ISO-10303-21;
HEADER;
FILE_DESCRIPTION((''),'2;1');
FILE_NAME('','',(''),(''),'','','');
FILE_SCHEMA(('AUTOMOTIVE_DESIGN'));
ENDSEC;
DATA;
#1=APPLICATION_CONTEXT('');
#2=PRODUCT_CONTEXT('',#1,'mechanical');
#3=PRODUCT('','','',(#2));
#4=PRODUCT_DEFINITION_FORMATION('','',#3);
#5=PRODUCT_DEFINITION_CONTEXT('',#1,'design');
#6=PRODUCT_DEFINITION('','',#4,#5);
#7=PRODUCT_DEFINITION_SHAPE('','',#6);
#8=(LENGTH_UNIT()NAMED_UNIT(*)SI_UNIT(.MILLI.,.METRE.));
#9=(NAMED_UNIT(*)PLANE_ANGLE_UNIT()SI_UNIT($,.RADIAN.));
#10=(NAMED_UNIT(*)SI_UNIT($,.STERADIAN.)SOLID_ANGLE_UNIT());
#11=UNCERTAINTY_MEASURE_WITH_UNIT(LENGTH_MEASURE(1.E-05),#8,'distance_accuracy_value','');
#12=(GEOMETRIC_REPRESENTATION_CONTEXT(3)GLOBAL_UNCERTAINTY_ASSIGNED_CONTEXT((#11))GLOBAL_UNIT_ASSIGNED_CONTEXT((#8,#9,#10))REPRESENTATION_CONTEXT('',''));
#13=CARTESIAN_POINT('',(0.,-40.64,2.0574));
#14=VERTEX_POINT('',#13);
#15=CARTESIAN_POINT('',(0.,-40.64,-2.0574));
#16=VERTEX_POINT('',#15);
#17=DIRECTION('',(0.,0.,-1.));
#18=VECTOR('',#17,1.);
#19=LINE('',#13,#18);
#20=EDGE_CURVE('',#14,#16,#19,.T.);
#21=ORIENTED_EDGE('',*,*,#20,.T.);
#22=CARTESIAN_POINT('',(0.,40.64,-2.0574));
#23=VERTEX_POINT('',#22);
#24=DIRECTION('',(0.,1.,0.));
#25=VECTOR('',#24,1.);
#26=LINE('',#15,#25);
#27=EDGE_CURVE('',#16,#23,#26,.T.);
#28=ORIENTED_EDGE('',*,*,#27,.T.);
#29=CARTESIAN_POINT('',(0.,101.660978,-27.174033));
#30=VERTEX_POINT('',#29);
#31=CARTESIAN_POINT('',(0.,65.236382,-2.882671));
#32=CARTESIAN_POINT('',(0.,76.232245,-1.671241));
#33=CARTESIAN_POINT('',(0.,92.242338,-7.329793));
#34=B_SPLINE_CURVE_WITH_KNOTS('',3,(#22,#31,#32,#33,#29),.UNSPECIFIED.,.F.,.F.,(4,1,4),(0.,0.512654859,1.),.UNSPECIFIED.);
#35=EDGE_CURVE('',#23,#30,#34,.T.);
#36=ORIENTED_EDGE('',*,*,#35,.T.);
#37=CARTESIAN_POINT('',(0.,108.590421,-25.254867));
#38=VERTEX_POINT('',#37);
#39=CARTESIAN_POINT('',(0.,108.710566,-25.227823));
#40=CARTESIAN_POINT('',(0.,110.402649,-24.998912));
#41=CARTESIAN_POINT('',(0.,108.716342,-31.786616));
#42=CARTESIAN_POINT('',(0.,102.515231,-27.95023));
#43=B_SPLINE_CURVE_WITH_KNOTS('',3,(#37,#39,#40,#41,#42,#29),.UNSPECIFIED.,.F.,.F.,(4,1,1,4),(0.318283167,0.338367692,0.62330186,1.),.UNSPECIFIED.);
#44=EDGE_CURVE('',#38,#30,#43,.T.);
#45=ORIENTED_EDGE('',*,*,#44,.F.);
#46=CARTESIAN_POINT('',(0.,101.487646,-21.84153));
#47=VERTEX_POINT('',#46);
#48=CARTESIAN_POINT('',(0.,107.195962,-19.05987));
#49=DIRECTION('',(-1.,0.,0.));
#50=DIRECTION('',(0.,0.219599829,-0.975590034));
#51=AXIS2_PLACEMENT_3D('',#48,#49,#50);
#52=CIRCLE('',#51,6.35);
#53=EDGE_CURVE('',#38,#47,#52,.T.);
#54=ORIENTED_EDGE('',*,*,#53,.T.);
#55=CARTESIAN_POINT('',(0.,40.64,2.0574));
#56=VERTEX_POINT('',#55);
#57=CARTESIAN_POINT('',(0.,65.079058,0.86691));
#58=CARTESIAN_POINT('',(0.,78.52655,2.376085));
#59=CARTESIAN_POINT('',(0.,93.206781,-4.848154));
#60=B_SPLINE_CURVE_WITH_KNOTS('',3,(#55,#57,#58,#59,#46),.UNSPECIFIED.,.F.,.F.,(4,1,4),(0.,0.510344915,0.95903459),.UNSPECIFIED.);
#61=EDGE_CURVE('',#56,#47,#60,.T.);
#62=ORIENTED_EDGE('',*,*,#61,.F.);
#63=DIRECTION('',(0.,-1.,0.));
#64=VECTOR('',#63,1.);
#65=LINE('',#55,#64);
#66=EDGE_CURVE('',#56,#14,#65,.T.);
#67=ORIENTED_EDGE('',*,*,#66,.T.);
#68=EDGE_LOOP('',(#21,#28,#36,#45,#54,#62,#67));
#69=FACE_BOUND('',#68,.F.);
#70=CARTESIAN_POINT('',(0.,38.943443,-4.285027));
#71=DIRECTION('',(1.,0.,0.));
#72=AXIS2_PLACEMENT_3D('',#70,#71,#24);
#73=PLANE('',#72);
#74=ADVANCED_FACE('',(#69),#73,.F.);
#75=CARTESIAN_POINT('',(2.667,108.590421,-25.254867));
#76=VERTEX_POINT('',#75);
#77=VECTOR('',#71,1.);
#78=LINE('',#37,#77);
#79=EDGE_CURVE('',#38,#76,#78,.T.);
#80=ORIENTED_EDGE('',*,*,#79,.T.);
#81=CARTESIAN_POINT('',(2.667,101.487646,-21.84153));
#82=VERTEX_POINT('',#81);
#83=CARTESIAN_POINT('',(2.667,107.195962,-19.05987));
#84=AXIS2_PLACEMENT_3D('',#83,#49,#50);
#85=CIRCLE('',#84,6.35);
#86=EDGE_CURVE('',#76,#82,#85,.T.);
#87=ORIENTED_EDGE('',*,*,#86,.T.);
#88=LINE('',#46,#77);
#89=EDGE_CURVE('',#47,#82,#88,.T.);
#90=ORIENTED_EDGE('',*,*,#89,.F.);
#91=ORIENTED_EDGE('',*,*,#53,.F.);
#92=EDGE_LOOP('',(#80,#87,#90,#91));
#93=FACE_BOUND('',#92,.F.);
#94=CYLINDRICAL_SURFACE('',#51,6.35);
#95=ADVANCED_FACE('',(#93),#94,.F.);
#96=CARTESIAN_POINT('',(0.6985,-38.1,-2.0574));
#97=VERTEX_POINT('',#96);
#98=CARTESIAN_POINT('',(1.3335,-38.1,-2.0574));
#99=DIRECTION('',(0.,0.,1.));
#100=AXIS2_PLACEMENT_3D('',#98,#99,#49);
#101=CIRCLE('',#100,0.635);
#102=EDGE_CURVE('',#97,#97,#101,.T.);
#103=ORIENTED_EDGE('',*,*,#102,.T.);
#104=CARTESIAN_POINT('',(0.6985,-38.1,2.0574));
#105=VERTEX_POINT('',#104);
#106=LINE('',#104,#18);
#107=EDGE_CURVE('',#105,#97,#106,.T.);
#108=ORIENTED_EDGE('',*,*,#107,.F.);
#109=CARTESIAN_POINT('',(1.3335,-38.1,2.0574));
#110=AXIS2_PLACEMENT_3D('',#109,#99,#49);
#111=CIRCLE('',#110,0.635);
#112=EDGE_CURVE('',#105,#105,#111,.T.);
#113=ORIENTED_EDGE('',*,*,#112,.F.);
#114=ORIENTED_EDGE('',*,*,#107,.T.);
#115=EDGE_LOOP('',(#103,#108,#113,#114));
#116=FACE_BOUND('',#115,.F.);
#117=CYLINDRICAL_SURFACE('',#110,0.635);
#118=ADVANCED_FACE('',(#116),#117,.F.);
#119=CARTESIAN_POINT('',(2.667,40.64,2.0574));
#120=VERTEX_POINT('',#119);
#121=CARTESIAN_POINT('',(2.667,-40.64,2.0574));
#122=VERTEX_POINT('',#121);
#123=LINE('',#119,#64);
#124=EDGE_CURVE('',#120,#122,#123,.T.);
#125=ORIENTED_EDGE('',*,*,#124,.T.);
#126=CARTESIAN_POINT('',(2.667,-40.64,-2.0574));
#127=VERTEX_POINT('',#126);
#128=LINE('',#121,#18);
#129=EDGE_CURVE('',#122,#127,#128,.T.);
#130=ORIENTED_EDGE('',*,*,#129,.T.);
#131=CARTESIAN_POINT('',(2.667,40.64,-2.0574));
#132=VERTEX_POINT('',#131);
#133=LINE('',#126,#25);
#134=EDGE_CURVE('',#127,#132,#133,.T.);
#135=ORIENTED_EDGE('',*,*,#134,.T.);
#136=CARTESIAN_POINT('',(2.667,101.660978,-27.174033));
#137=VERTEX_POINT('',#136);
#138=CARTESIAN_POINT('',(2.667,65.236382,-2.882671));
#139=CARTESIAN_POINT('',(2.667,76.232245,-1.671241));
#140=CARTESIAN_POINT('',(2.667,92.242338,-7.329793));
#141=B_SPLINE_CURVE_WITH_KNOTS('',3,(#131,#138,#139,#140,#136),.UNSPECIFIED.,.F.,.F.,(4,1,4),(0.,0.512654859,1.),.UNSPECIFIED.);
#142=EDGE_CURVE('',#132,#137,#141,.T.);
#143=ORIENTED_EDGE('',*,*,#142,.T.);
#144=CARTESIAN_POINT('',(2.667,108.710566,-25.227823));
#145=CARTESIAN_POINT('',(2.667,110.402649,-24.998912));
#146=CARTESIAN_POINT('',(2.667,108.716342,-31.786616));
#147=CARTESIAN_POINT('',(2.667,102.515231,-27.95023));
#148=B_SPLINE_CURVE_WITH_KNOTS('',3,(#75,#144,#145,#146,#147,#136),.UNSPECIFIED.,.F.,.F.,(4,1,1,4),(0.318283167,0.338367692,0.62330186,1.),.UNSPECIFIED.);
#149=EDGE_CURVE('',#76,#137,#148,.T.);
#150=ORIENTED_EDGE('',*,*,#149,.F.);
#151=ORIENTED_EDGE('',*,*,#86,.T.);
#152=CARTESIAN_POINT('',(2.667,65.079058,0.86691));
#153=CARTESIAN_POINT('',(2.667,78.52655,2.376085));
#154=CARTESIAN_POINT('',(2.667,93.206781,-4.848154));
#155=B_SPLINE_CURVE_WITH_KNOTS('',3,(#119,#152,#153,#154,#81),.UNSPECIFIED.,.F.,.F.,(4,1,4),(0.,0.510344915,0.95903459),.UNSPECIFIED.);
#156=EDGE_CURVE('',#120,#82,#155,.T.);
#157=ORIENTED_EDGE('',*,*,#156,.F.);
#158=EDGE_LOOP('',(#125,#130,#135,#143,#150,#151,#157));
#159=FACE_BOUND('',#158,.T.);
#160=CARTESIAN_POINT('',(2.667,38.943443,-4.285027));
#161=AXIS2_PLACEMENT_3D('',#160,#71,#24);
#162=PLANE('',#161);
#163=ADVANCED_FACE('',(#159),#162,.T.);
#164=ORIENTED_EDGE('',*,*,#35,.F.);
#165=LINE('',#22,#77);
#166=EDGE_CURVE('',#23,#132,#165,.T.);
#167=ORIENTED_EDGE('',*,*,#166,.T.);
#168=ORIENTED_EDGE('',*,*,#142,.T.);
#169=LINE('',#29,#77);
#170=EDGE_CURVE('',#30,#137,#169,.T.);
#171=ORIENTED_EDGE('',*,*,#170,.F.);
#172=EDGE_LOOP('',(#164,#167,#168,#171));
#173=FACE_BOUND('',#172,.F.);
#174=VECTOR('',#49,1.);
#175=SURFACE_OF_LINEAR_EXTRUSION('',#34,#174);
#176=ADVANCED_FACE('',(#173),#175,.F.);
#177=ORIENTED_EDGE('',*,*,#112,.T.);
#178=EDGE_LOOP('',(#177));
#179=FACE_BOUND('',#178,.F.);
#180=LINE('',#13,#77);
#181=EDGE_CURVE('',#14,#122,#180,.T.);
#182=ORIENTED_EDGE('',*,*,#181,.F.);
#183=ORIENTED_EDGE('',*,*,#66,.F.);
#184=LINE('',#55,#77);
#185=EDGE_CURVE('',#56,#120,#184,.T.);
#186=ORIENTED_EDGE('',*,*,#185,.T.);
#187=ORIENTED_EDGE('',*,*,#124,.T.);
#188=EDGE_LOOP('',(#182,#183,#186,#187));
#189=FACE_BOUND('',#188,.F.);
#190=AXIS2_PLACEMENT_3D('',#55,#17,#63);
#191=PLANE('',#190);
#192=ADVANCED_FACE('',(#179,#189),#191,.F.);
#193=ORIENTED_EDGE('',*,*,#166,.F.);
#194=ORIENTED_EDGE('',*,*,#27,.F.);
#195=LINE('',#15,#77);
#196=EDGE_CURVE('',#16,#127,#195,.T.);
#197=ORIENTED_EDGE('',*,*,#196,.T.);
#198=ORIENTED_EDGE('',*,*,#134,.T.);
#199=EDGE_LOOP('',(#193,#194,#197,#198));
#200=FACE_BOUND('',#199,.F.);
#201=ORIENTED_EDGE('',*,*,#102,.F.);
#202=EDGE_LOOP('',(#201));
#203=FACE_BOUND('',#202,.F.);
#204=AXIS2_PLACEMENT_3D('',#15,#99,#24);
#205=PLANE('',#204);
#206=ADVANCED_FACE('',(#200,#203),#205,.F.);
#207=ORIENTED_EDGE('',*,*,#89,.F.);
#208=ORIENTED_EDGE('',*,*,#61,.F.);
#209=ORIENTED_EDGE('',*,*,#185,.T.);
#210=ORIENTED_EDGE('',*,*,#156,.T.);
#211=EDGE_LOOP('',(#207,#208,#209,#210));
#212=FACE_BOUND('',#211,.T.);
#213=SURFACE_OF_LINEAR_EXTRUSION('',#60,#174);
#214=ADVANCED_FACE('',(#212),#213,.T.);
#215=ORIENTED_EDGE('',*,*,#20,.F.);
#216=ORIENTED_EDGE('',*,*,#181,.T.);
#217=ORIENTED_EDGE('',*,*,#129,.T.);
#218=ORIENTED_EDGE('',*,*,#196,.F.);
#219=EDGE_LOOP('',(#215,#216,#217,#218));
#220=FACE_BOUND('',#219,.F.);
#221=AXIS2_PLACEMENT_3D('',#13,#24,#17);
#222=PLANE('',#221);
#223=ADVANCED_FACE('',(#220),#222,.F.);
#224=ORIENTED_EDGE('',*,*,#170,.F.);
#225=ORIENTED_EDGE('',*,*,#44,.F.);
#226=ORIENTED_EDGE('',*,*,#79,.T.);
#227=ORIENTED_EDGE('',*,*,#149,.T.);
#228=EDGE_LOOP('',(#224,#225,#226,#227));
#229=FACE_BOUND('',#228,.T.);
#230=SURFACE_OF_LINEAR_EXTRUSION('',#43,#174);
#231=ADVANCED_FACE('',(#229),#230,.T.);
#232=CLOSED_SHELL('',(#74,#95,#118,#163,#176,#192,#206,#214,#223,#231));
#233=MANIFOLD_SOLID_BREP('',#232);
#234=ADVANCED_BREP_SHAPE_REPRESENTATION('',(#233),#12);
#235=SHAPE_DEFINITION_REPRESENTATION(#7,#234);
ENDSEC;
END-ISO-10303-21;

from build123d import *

# Parameters (mm, degrees)
F1_DEPTH = 2.667
F3_DEPTH = 7.62


# Not quite as in the source:
# - a feature names something its author has since deleted; it is built from what else it names


with BuildPart() as f1:
    # F0 (on Right) → F1 (new body)
    with BuildSketch(Plane.YZ):
        with BuildLine():
            Line((40.64, 2.0574), (-40.64, 2.0574))
            Line((-40.64, 2.0574), (-40.64, -2.0574))
            Line((-40.64, -2.0574), (40.64, -2.0574))
            add(Edge.make_bspline(
                [(40.64, -2.0574), (65.2363823215, -2.8826714553), (76.2322454092, -1.6712410932), (92.2423381, -7.3297932663), (101.6609776162, -27.1740333276)],
                knots=[0, 0, 0, 0, 0.5126548587, 1, 1, 1, 1], degree=3))
            add(Edge.make_bspline(
                [(108.5904209732, -25.2548671865), (108.7105657483, -25.2278232734), (110.4026487154, -24.9989116735), (108.7163421886, -31.7866160491), (102.515230767, -27.9502297874), (101.6609776162, -27.1740333276)],
                knots=[0.3182831671, 0.3182831671, 0.3182831671, 0.3182831671, 0.3383676917, 0.6233018603, 1, 1, 1, 1], degree=3))
            add(Edge.make_bspline(
                [(103.7919735763, -26.8453606559), (102.5910145162, -29.1182734519), (106.6864645495, -25.6834370678), (108.5904209732, -25.2548671865)],
                knots=[0, 0, 0, 0, 0.3182831671, 0.3182831671, 0.3182831671, 0.3182831671], degree=3))
            add(Edge.make_bspline(
                [(101.4876463788, -21.8415304228), (102.2436901965, -23.3930273167), (103.0115093513, -25.0580021652), (103.7919735763, -26.8453606559)],
                knots=[0.9590345904, 0.9590345904, 0.9590345904, 0.9590345904, 1, 1, 1, 1], degree=3))
            add(Edge.make_bspline(
                [(40.64, 2.0574), (65.0790578645, 0.8669100168), (78.5265501087, 2.3760846123), (93.2067806774, -4.8481536974), (101.4876463788, -21.8415304228)],
                knots=[0, 0, 0, 0, 0.5103449149, 0.9590345904, 0.9590345904, 0.9590345904, 0.9590345904], degree=3))
        make_face()
        with BuildLine():
            ThreePointArc((108.5904209732, -25.2548671865), (104.4454971864, -24.7832822995), (101.4876463788, -21.8415304228))
            add(Edge.make_bspline(
                [(101.4876463788, -21.8415304228), (102.2436901965, -23.3930273167), (103.0115093513, -25.0580021652), (103.7919735763, -26.8453606559)],
                knots=[0.9590345904, 0.9590345904, 0.9590345904, 0.9590345904, 1, 1, 1, 1], degree=3))
            add(Edge.make_bspline(
                [(103.7919735763, -26.8453606559), (102.5910145162, -29.1182734519), (106.6864645495, -25.6834370678), (108.5904209732, -25.2548671865)],
                knots=[0, 0, 0, 0, 0.3182831671, 0.3182831671, 0.3182831671, 0.3182831671], degree=3))
        make_face()
    extrude(amount=F1_DEPTH)

    # F2 (on face) → F3 (cut)
    with BuildSketch(Plane.XY.offset(2.0574)):
        with BuildLine():
            Line((0.6985, -38.1), (1.9685, -38.1))
            ThreePointArc((1.9685, -38.1), (1.3335, -37.465), (0.6985, -38.1))
        make_face()
        with BuildLine():
            ThreePointArc((0.6985, -38.1), (1.3335, -38.735), (1.9685, -38.1))
            Line((1.9685, -38.1), (0.6985, -38.1))
        make_face()
    extrude(amount=-F3_DEPTH, mode=Mode.SUBTRACT)


solid = f1.part
